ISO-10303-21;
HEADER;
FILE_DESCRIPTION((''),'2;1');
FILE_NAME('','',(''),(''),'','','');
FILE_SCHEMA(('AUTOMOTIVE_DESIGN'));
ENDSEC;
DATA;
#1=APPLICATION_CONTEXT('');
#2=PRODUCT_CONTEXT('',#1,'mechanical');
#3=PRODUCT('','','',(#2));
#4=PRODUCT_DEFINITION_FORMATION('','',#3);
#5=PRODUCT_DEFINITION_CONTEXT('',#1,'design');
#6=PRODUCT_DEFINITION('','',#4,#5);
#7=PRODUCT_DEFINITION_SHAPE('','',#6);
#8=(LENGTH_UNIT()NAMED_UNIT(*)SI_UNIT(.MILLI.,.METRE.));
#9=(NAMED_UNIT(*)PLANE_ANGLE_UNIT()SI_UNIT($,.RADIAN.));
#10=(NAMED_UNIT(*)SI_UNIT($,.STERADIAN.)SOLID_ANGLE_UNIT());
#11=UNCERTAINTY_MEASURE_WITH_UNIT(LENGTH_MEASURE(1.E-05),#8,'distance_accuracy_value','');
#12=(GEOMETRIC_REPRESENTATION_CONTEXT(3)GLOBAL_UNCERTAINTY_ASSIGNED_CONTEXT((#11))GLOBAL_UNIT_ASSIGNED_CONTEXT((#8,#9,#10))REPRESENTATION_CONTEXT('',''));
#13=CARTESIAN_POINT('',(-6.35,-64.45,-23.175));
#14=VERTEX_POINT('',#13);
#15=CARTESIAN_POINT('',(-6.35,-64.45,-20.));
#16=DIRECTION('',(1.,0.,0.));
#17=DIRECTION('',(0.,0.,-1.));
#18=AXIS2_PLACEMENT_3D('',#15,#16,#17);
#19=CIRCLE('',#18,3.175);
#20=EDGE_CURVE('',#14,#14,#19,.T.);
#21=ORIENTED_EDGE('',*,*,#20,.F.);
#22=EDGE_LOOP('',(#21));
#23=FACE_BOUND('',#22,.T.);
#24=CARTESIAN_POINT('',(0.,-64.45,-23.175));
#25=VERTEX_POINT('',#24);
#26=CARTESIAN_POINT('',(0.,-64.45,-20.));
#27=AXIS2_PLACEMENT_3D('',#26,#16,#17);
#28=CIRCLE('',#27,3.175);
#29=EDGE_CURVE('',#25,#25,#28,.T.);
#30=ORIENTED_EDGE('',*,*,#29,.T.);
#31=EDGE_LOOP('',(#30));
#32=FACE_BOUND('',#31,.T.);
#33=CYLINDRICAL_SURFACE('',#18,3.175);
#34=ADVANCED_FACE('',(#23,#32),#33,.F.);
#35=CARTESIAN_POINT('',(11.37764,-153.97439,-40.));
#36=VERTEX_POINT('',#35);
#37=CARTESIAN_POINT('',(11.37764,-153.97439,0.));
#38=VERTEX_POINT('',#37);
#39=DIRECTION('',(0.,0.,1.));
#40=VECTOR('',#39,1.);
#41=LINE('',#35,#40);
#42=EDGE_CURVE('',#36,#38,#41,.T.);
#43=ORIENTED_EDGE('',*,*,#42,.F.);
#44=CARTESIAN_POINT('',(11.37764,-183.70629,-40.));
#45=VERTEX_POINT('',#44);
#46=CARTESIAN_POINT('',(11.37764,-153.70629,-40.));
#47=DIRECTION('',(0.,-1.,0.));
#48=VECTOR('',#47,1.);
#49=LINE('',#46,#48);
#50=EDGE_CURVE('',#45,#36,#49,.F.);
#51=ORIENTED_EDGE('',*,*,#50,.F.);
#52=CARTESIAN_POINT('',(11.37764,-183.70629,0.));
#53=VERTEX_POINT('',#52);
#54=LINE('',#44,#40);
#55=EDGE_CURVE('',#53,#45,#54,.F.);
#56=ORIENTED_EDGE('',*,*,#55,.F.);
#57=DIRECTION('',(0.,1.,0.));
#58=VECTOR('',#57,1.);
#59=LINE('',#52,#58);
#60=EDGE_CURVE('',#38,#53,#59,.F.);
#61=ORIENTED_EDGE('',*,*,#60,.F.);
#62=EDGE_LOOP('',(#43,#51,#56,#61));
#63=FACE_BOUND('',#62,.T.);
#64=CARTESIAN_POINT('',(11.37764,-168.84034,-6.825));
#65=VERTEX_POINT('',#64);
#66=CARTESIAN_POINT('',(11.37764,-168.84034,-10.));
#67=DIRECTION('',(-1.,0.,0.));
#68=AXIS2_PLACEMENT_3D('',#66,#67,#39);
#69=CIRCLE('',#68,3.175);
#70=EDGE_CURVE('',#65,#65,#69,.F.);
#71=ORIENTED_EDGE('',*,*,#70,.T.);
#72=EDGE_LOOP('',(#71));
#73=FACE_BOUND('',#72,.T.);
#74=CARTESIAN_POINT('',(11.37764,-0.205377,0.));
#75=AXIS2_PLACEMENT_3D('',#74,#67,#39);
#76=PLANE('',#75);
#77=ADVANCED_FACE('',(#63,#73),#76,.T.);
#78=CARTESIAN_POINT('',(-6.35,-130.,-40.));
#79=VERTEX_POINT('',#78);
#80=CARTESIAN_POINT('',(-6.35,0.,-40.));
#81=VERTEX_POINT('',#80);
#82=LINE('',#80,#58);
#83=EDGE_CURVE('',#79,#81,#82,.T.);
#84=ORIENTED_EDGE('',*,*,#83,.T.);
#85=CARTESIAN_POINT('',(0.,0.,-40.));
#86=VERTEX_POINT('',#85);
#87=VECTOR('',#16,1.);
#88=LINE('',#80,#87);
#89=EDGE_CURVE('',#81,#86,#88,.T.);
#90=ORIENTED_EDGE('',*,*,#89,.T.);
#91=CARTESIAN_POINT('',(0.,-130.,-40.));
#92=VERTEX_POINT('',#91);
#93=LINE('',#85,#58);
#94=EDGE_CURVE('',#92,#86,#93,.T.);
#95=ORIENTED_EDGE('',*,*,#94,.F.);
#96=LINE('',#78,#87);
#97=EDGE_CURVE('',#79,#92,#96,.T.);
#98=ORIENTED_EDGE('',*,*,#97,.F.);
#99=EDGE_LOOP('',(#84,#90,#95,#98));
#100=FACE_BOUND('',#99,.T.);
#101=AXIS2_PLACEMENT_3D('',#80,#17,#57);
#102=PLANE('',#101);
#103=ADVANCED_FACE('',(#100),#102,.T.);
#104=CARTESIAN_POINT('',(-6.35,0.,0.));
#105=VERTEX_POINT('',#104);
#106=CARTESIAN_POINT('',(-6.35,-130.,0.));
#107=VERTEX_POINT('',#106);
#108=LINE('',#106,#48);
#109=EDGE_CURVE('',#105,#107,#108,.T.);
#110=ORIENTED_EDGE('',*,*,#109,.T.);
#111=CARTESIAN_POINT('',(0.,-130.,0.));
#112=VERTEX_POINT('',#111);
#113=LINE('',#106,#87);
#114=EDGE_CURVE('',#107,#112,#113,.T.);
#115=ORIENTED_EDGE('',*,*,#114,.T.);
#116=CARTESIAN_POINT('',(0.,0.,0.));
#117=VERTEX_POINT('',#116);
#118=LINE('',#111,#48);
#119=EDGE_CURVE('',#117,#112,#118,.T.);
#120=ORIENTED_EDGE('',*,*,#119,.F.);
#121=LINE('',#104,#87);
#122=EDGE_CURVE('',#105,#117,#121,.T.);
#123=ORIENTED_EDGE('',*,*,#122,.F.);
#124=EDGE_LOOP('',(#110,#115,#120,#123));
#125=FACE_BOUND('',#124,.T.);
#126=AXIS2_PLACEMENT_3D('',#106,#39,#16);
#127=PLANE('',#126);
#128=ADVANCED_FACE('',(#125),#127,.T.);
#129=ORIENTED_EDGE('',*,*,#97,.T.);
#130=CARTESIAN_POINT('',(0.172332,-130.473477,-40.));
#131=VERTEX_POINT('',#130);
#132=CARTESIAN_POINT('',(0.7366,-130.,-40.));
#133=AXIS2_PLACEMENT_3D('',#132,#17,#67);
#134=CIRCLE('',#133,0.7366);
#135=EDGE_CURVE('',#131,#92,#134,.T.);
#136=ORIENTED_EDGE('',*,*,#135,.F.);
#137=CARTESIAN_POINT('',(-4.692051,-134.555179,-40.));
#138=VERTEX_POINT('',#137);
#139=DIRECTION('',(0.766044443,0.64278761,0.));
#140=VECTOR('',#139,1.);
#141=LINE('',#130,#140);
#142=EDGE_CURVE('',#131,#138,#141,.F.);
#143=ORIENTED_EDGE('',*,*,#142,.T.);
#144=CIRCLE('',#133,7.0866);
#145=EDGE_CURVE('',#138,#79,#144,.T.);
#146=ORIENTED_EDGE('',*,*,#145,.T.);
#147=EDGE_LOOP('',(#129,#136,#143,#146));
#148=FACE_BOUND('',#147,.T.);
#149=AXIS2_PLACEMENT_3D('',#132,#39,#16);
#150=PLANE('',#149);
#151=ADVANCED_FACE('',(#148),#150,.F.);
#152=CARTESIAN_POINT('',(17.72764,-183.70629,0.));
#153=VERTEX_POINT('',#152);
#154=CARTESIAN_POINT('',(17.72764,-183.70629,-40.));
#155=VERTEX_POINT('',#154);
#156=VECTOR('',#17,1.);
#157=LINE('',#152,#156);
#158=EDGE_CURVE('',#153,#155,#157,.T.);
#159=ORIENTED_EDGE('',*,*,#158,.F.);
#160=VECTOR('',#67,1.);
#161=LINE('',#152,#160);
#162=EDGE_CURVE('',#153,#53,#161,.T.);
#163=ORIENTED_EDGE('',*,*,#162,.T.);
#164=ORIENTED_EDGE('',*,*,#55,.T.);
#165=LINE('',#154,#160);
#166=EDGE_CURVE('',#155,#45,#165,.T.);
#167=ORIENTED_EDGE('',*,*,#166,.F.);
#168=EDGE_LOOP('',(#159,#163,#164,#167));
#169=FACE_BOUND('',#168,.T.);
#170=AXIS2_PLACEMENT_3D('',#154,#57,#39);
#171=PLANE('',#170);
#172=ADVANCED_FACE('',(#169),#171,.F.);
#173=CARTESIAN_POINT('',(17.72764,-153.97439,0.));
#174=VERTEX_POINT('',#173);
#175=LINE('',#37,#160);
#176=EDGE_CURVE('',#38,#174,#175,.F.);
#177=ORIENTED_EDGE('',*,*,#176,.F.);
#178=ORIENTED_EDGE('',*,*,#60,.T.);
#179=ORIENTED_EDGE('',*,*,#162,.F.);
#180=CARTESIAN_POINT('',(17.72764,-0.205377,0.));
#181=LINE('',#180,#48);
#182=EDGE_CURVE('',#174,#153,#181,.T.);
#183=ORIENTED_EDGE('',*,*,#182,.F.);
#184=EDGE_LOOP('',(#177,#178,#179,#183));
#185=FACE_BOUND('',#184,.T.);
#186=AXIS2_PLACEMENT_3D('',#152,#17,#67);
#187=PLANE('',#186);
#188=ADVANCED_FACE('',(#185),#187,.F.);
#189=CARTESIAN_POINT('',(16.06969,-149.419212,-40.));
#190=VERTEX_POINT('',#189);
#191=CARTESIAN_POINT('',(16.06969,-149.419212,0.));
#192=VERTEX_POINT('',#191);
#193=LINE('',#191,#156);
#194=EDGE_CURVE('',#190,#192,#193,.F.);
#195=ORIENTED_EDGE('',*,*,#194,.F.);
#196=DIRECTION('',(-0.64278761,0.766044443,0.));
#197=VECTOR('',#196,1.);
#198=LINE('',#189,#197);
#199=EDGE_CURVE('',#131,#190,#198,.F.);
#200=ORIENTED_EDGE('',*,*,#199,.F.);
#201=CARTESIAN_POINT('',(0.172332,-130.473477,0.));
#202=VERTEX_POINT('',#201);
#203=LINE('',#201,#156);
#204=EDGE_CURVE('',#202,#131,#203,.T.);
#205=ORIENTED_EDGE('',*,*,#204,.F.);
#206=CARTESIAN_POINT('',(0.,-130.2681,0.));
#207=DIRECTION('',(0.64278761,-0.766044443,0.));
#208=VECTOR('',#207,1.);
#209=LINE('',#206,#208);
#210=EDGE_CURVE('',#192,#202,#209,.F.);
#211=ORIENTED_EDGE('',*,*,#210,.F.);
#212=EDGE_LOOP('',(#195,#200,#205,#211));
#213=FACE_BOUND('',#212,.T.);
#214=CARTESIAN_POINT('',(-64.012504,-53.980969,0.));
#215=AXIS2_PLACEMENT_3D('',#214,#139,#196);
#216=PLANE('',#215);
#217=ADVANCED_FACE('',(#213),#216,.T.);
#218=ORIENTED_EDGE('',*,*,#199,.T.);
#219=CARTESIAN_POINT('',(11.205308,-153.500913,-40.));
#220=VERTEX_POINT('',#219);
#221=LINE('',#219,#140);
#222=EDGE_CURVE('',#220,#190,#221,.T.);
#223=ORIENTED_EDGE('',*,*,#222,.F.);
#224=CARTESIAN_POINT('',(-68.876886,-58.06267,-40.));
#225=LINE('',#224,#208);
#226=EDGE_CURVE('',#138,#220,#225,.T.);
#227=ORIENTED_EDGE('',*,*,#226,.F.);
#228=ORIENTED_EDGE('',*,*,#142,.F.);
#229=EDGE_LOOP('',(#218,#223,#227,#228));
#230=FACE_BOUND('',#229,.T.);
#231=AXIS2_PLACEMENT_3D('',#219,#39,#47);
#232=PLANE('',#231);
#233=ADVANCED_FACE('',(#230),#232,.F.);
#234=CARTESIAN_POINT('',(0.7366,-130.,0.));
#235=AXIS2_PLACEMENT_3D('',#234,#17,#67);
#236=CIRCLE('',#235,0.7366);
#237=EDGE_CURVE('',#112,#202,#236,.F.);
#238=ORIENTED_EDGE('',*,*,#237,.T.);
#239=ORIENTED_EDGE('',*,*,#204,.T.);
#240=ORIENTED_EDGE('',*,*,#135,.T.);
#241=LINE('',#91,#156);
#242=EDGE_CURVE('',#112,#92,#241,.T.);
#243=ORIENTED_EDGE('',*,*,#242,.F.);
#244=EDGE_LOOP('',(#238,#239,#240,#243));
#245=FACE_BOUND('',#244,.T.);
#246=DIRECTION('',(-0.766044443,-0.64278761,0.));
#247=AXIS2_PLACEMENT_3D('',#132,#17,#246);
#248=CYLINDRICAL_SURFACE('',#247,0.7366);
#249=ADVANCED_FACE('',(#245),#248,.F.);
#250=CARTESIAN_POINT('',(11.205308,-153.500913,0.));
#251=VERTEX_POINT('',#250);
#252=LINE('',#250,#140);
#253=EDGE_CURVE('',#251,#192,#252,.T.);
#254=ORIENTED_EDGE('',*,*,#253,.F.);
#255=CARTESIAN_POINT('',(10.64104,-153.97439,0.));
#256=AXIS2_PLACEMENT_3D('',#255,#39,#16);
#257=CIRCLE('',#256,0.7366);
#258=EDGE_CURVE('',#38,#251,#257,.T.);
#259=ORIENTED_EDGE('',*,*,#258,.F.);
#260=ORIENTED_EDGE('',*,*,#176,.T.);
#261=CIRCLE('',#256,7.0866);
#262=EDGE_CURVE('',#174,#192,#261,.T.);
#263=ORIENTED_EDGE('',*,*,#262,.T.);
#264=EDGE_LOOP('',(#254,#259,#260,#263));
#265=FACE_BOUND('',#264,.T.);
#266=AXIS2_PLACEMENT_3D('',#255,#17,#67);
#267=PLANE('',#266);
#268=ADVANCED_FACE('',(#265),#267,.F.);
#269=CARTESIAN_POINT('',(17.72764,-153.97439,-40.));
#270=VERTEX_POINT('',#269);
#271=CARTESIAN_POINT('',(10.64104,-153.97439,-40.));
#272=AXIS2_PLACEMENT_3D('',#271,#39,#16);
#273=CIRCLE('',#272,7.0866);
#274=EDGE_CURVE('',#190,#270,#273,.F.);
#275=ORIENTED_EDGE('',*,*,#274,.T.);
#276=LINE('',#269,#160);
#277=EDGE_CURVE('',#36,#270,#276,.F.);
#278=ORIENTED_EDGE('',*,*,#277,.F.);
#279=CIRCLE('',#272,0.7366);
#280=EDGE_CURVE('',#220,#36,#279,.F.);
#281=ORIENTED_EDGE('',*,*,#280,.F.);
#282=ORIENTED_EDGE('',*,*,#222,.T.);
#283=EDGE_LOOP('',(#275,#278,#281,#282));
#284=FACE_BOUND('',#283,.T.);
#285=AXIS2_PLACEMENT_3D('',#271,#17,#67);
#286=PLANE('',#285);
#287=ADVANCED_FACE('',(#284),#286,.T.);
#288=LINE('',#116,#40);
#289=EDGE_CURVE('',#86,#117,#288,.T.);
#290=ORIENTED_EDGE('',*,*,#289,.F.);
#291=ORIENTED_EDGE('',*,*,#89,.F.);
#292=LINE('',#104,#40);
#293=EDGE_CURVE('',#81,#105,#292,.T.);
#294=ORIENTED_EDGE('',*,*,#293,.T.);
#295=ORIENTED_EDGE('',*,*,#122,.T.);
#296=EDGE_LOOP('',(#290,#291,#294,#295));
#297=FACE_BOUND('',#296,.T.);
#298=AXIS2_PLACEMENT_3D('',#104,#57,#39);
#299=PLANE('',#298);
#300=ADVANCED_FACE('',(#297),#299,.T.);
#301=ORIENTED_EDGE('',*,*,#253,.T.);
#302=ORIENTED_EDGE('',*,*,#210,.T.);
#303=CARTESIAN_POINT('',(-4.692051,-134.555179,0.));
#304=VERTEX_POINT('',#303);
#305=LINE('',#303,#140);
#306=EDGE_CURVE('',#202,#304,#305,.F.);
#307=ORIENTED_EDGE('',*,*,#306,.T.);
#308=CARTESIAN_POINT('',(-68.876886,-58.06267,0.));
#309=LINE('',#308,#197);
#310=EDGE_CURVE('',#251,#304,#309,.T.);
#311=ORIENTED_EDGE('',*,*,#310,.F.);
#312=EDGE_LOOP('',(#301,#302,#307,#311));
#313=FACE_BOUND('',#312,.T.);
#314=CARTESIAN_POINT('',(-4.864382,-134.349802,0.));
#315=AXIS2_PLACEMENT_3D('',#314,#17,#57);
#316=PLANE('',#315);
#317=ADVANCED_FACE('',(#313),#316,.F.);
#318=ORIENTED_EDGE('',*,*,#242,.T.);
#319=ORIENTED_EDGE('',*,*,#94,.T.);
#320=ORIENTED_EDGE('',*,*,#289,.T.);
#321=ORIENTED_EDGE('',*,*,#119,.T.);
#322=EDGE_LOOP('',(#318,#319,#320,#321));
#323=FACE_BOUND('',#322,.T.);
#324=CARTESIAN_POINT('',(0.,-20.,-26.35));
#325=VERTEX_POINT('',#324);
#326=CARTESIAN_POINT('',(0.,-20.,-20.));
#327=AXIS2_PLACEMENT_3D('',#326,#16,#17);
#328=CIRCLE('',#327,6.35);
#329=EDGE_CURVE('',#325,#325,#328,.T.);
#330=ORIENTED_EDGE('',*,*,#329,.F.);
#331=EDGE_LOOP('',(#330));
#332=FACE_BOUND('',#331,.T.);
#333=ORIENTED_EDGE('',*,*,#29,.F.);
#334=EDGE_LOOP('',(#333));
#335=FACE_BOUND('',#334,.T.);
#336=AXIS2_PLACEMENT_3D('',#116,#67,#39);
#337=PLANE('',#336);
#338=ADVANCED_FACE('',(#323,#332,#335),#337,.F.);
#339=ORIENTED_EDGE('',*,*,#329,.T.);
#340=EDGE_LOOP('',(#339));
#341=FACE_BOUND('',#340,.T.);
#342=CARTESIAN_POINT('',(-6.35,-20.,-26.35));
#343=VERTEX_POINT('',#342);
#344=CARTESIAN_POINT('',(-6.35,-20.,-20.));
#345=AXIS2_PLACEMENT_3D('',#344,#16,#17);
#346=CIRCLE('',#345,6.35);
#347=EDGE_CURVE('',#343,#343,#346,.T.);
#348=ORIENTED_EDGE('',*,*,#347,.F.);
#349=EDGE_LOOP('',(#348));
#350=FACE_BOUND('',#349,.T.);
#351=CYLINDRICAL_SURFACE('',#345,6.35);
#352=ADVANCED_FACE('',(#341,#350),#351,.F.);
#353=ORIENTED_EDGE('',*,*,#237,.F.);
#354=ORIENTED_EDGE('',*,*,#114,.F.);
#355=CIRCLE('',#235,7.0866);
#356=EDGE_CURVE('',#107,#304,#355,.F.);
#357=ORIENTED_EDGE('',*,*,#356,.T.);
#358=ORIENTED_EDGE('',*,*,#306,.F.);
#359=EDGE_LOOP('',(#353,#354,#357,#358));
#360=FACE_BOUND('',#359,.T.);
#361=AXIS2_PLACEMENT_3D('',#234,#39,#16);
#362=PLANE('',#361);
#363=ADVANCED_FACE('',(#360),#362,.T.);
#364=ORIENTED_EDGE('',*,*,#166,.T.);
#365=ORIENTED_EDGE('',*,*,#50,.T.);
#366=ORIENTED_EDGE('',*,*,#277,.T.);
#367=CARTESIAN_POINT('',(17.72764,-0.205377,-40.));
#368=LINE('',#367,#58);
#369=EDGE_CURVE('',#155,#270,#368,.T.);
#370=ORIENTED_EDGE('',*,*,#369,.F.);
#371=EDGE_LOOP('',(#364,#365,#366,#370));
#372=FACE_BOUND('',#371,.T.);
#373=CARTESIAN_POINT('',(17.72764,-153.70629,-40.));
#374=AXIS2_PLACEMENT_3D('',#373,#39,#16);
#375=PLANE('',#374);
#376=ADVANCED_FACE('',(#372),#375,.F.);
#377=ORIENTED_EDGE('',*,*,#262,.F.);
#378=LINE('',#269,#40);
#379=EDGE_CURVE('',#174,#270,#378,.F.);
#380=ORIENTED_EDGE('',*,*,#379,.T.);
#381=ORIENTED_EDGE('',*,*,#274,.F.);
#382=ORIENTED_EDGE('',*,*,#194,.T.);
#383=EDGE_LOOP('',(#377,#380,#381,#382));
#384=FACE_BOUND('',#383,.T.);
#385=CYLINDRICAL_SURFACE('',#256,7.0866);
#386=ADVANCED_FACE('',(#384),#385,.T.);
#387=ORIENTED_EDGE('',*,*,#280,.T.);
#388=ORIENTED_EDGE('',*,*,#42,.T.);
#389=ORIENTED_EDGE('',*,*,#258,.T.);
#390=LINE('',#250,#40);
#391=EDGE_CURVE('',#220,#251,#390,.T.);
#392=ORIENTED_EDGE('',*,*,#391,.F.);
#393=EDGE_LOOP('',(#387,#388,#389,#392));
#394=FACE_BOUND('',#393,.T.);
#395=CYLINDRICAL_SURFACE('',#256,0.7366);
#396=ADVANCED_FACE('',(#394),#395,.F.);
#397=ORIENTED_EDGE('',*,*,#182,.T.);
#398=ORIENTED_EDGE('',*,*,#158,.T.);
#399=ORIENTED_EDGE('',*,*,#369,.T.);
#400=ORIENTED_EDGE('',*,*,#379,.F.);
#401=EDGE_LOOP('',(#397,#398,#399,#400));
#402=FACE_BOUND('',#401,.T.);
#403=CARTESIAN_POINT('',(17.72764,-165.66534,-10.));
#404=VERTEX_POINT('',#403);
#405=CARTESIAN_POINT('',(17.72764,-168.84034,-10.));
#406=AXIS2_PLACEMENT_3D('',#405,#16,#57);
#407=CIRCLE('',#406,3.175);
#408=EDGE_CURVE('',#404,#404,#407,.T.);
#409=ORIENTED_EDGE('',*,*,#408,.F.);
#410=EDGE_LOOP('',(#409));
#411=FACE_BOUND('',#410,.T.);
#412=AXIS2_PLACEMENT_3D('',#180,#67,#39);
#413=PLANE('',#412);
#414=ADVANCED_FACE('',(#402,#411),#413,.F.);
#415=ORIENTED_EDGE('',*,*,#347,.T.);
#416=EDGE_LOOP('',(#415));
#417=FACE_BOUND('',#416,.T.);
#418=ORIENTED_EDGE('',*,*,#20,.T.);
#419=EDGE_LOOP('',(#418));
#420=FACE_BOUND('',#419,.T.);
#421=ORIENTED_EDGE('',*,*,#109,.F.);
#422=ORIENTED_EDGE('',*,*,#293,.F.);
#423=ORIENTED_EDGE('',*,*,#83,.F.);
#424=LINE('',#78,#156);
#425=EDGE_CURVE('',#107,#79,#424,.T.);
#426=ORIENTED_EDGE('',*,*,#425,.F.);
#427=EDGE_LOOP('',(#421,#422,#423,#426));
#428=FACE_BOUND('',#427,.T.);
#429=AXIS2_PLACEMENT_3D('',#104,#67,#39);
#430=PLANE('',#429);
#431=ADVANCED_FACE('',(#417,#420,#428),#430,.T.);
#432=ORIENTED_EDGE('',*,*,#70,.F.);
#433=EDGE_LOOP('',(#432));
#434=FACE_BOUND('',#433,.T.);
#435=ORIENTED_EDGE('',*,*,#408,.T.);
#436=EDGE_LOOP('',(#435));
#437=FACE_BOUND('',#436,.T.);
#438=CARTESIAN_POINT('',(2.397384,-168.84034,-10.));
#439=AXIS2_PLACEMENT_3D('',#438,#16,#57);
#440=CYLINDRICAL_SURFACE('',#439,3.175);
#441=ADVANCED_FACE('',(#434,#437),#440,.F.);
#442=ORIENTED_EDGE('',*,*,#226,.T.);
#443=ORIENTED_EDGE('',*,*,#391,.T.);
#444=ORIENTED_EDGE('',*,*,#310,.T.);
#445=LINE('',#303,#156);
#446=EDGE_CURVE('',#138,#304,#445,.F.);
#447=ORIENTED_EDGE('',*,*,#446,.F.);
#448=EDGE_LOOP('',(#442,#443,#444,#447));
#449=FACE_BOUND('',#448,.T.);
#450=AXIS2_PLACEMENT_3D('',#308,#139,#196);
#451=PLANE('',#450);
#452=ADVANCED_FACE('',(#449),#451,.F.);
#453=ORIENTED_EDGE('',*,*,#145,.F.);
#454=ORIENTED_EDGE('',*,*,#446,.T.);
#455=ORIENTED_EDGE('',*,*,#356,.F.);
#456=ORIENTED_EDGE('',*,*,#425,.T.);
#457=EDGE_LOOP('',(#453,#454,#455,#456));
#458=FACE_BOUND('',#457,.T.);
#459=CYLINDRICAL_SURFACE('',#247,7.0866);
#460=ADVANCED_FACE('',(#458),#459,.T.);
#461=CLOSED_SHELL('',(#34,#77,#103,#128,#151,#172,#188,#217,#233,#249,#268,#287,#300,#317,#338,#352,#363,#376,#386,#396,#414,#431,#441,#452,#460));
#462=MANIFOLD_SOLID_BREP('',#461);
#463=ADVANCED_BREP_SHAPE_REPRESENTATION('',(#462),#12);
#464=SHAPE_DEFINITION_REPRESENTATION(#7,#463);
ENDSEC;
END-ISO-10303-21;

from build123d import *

# Parameters (mm, degrees)
SKETCH1_W          = 40
SKETCH1_H          = 130
SKETCH1_R          = 6.35
SKETCH1_R_2        = 3.175
BASE_FLANGE1_DEPTH = 6.35
EDGE_FLANGE1_DEPTH = 40
EDGE_FLANGE2_DEPTH = 40
SKETCH20_R         = 3.175
CUT_EXTRUDE3_DEPTH = 6.35


# Sheet-metal steps are written as plain solids
with BuildPart() as part:
    # Sketch1 → Base-Flange1 (new body)
    with BuildSketch(Plane(origin=(0, 0, 0), x_dir=(0, 0, -1), z_dir=(1, 0, 0))):
        with Locations((20, -65)):
            Rectangle(SKETCH1_W, SKETCH1_H)
        with Locations((20, -20)):
            Circle(SKETCH1_R, mode=Mode.SUBTRACT)
        with Locations((20, -64.45)):
            Circle(SKETCH1_R_2, mode=Mode.SUBTRACT)
    extrude(amount=-BASE_FLANGE1_DEPTH)

    # Edge-Flange1 section (across the edge) → Edge-Flange1 (add)
    with BuildSketch(Plane(origin=(0, -130.268100475, 0), x_dir=(0.7660444431189817, 0.642787609686535, 0), z_dir=(0, 0, -1))):
        with BuildLine():
            Line((-6.35, 0.268100475), (-6.35, 25))
            Line((-6.35, 25), (0, 25))
            Line((0, 25), (0, 0.268100475))
            ThreePointArc((0, 0.268100475), (0.044422416, 0.016168437), (0.172331663, -0.205376879))
            Line((0.172331663, -0.205376879), (-4.692050551, -4.2870782))
            ThreePointArc((-4.692050551, -4.2870782), (-5.922625726, -2.155659473), (-6.35, 0.268100475))
        make_face()
    extrude(amount=EDGE_FLANGE1_DEPTH)

    # Edge-Flange2 section (across the edge) → Edge-Flange2 (add)
    with BuildSketch(Plane(origin=(11.377639692, -153.706289753, -40), x_dir=(-1, 0, 0), z_dir=(0, 0, 1))):
        with BuildLine():
            Line((-6.35, 0.268100475), (-6.35, 30))
            Line((-6.35, 30), (0, 30))
            Line((0, 30), (0, 0.268100475))
            ThreePointArc((0, 0.268100475), (0.044422416, 0.016168437), (0.172331663, -0.205376879))
            Line((0.172331663, -0.205376879), (-4.692050551, -4.2870782))
            ThreePointArc((-4.692050551, -4.2870782), (-5.922625726, -2.155659473), (-6.35, 0.268100475))
        make_face()
    extrude(amount=EDGE_FLANGE2_DEPTH)

    # Sketch20 → Cut-Extrude3 (cut)
    with BuildSketch(Plane(origin=(17.727639692, 0, 0), x_dir=(0, 0, -1), z_dir=(1, 0, 0))):
        with Locations(Location((10, -168.84033999, 0), (0, 0, 90))):
            Circle(SKETCH20_R)
    extrude(amount=-CUT_EXTRUDE3_DEPTH, mode=Mode.SUBTRACT)


solid = part.part
